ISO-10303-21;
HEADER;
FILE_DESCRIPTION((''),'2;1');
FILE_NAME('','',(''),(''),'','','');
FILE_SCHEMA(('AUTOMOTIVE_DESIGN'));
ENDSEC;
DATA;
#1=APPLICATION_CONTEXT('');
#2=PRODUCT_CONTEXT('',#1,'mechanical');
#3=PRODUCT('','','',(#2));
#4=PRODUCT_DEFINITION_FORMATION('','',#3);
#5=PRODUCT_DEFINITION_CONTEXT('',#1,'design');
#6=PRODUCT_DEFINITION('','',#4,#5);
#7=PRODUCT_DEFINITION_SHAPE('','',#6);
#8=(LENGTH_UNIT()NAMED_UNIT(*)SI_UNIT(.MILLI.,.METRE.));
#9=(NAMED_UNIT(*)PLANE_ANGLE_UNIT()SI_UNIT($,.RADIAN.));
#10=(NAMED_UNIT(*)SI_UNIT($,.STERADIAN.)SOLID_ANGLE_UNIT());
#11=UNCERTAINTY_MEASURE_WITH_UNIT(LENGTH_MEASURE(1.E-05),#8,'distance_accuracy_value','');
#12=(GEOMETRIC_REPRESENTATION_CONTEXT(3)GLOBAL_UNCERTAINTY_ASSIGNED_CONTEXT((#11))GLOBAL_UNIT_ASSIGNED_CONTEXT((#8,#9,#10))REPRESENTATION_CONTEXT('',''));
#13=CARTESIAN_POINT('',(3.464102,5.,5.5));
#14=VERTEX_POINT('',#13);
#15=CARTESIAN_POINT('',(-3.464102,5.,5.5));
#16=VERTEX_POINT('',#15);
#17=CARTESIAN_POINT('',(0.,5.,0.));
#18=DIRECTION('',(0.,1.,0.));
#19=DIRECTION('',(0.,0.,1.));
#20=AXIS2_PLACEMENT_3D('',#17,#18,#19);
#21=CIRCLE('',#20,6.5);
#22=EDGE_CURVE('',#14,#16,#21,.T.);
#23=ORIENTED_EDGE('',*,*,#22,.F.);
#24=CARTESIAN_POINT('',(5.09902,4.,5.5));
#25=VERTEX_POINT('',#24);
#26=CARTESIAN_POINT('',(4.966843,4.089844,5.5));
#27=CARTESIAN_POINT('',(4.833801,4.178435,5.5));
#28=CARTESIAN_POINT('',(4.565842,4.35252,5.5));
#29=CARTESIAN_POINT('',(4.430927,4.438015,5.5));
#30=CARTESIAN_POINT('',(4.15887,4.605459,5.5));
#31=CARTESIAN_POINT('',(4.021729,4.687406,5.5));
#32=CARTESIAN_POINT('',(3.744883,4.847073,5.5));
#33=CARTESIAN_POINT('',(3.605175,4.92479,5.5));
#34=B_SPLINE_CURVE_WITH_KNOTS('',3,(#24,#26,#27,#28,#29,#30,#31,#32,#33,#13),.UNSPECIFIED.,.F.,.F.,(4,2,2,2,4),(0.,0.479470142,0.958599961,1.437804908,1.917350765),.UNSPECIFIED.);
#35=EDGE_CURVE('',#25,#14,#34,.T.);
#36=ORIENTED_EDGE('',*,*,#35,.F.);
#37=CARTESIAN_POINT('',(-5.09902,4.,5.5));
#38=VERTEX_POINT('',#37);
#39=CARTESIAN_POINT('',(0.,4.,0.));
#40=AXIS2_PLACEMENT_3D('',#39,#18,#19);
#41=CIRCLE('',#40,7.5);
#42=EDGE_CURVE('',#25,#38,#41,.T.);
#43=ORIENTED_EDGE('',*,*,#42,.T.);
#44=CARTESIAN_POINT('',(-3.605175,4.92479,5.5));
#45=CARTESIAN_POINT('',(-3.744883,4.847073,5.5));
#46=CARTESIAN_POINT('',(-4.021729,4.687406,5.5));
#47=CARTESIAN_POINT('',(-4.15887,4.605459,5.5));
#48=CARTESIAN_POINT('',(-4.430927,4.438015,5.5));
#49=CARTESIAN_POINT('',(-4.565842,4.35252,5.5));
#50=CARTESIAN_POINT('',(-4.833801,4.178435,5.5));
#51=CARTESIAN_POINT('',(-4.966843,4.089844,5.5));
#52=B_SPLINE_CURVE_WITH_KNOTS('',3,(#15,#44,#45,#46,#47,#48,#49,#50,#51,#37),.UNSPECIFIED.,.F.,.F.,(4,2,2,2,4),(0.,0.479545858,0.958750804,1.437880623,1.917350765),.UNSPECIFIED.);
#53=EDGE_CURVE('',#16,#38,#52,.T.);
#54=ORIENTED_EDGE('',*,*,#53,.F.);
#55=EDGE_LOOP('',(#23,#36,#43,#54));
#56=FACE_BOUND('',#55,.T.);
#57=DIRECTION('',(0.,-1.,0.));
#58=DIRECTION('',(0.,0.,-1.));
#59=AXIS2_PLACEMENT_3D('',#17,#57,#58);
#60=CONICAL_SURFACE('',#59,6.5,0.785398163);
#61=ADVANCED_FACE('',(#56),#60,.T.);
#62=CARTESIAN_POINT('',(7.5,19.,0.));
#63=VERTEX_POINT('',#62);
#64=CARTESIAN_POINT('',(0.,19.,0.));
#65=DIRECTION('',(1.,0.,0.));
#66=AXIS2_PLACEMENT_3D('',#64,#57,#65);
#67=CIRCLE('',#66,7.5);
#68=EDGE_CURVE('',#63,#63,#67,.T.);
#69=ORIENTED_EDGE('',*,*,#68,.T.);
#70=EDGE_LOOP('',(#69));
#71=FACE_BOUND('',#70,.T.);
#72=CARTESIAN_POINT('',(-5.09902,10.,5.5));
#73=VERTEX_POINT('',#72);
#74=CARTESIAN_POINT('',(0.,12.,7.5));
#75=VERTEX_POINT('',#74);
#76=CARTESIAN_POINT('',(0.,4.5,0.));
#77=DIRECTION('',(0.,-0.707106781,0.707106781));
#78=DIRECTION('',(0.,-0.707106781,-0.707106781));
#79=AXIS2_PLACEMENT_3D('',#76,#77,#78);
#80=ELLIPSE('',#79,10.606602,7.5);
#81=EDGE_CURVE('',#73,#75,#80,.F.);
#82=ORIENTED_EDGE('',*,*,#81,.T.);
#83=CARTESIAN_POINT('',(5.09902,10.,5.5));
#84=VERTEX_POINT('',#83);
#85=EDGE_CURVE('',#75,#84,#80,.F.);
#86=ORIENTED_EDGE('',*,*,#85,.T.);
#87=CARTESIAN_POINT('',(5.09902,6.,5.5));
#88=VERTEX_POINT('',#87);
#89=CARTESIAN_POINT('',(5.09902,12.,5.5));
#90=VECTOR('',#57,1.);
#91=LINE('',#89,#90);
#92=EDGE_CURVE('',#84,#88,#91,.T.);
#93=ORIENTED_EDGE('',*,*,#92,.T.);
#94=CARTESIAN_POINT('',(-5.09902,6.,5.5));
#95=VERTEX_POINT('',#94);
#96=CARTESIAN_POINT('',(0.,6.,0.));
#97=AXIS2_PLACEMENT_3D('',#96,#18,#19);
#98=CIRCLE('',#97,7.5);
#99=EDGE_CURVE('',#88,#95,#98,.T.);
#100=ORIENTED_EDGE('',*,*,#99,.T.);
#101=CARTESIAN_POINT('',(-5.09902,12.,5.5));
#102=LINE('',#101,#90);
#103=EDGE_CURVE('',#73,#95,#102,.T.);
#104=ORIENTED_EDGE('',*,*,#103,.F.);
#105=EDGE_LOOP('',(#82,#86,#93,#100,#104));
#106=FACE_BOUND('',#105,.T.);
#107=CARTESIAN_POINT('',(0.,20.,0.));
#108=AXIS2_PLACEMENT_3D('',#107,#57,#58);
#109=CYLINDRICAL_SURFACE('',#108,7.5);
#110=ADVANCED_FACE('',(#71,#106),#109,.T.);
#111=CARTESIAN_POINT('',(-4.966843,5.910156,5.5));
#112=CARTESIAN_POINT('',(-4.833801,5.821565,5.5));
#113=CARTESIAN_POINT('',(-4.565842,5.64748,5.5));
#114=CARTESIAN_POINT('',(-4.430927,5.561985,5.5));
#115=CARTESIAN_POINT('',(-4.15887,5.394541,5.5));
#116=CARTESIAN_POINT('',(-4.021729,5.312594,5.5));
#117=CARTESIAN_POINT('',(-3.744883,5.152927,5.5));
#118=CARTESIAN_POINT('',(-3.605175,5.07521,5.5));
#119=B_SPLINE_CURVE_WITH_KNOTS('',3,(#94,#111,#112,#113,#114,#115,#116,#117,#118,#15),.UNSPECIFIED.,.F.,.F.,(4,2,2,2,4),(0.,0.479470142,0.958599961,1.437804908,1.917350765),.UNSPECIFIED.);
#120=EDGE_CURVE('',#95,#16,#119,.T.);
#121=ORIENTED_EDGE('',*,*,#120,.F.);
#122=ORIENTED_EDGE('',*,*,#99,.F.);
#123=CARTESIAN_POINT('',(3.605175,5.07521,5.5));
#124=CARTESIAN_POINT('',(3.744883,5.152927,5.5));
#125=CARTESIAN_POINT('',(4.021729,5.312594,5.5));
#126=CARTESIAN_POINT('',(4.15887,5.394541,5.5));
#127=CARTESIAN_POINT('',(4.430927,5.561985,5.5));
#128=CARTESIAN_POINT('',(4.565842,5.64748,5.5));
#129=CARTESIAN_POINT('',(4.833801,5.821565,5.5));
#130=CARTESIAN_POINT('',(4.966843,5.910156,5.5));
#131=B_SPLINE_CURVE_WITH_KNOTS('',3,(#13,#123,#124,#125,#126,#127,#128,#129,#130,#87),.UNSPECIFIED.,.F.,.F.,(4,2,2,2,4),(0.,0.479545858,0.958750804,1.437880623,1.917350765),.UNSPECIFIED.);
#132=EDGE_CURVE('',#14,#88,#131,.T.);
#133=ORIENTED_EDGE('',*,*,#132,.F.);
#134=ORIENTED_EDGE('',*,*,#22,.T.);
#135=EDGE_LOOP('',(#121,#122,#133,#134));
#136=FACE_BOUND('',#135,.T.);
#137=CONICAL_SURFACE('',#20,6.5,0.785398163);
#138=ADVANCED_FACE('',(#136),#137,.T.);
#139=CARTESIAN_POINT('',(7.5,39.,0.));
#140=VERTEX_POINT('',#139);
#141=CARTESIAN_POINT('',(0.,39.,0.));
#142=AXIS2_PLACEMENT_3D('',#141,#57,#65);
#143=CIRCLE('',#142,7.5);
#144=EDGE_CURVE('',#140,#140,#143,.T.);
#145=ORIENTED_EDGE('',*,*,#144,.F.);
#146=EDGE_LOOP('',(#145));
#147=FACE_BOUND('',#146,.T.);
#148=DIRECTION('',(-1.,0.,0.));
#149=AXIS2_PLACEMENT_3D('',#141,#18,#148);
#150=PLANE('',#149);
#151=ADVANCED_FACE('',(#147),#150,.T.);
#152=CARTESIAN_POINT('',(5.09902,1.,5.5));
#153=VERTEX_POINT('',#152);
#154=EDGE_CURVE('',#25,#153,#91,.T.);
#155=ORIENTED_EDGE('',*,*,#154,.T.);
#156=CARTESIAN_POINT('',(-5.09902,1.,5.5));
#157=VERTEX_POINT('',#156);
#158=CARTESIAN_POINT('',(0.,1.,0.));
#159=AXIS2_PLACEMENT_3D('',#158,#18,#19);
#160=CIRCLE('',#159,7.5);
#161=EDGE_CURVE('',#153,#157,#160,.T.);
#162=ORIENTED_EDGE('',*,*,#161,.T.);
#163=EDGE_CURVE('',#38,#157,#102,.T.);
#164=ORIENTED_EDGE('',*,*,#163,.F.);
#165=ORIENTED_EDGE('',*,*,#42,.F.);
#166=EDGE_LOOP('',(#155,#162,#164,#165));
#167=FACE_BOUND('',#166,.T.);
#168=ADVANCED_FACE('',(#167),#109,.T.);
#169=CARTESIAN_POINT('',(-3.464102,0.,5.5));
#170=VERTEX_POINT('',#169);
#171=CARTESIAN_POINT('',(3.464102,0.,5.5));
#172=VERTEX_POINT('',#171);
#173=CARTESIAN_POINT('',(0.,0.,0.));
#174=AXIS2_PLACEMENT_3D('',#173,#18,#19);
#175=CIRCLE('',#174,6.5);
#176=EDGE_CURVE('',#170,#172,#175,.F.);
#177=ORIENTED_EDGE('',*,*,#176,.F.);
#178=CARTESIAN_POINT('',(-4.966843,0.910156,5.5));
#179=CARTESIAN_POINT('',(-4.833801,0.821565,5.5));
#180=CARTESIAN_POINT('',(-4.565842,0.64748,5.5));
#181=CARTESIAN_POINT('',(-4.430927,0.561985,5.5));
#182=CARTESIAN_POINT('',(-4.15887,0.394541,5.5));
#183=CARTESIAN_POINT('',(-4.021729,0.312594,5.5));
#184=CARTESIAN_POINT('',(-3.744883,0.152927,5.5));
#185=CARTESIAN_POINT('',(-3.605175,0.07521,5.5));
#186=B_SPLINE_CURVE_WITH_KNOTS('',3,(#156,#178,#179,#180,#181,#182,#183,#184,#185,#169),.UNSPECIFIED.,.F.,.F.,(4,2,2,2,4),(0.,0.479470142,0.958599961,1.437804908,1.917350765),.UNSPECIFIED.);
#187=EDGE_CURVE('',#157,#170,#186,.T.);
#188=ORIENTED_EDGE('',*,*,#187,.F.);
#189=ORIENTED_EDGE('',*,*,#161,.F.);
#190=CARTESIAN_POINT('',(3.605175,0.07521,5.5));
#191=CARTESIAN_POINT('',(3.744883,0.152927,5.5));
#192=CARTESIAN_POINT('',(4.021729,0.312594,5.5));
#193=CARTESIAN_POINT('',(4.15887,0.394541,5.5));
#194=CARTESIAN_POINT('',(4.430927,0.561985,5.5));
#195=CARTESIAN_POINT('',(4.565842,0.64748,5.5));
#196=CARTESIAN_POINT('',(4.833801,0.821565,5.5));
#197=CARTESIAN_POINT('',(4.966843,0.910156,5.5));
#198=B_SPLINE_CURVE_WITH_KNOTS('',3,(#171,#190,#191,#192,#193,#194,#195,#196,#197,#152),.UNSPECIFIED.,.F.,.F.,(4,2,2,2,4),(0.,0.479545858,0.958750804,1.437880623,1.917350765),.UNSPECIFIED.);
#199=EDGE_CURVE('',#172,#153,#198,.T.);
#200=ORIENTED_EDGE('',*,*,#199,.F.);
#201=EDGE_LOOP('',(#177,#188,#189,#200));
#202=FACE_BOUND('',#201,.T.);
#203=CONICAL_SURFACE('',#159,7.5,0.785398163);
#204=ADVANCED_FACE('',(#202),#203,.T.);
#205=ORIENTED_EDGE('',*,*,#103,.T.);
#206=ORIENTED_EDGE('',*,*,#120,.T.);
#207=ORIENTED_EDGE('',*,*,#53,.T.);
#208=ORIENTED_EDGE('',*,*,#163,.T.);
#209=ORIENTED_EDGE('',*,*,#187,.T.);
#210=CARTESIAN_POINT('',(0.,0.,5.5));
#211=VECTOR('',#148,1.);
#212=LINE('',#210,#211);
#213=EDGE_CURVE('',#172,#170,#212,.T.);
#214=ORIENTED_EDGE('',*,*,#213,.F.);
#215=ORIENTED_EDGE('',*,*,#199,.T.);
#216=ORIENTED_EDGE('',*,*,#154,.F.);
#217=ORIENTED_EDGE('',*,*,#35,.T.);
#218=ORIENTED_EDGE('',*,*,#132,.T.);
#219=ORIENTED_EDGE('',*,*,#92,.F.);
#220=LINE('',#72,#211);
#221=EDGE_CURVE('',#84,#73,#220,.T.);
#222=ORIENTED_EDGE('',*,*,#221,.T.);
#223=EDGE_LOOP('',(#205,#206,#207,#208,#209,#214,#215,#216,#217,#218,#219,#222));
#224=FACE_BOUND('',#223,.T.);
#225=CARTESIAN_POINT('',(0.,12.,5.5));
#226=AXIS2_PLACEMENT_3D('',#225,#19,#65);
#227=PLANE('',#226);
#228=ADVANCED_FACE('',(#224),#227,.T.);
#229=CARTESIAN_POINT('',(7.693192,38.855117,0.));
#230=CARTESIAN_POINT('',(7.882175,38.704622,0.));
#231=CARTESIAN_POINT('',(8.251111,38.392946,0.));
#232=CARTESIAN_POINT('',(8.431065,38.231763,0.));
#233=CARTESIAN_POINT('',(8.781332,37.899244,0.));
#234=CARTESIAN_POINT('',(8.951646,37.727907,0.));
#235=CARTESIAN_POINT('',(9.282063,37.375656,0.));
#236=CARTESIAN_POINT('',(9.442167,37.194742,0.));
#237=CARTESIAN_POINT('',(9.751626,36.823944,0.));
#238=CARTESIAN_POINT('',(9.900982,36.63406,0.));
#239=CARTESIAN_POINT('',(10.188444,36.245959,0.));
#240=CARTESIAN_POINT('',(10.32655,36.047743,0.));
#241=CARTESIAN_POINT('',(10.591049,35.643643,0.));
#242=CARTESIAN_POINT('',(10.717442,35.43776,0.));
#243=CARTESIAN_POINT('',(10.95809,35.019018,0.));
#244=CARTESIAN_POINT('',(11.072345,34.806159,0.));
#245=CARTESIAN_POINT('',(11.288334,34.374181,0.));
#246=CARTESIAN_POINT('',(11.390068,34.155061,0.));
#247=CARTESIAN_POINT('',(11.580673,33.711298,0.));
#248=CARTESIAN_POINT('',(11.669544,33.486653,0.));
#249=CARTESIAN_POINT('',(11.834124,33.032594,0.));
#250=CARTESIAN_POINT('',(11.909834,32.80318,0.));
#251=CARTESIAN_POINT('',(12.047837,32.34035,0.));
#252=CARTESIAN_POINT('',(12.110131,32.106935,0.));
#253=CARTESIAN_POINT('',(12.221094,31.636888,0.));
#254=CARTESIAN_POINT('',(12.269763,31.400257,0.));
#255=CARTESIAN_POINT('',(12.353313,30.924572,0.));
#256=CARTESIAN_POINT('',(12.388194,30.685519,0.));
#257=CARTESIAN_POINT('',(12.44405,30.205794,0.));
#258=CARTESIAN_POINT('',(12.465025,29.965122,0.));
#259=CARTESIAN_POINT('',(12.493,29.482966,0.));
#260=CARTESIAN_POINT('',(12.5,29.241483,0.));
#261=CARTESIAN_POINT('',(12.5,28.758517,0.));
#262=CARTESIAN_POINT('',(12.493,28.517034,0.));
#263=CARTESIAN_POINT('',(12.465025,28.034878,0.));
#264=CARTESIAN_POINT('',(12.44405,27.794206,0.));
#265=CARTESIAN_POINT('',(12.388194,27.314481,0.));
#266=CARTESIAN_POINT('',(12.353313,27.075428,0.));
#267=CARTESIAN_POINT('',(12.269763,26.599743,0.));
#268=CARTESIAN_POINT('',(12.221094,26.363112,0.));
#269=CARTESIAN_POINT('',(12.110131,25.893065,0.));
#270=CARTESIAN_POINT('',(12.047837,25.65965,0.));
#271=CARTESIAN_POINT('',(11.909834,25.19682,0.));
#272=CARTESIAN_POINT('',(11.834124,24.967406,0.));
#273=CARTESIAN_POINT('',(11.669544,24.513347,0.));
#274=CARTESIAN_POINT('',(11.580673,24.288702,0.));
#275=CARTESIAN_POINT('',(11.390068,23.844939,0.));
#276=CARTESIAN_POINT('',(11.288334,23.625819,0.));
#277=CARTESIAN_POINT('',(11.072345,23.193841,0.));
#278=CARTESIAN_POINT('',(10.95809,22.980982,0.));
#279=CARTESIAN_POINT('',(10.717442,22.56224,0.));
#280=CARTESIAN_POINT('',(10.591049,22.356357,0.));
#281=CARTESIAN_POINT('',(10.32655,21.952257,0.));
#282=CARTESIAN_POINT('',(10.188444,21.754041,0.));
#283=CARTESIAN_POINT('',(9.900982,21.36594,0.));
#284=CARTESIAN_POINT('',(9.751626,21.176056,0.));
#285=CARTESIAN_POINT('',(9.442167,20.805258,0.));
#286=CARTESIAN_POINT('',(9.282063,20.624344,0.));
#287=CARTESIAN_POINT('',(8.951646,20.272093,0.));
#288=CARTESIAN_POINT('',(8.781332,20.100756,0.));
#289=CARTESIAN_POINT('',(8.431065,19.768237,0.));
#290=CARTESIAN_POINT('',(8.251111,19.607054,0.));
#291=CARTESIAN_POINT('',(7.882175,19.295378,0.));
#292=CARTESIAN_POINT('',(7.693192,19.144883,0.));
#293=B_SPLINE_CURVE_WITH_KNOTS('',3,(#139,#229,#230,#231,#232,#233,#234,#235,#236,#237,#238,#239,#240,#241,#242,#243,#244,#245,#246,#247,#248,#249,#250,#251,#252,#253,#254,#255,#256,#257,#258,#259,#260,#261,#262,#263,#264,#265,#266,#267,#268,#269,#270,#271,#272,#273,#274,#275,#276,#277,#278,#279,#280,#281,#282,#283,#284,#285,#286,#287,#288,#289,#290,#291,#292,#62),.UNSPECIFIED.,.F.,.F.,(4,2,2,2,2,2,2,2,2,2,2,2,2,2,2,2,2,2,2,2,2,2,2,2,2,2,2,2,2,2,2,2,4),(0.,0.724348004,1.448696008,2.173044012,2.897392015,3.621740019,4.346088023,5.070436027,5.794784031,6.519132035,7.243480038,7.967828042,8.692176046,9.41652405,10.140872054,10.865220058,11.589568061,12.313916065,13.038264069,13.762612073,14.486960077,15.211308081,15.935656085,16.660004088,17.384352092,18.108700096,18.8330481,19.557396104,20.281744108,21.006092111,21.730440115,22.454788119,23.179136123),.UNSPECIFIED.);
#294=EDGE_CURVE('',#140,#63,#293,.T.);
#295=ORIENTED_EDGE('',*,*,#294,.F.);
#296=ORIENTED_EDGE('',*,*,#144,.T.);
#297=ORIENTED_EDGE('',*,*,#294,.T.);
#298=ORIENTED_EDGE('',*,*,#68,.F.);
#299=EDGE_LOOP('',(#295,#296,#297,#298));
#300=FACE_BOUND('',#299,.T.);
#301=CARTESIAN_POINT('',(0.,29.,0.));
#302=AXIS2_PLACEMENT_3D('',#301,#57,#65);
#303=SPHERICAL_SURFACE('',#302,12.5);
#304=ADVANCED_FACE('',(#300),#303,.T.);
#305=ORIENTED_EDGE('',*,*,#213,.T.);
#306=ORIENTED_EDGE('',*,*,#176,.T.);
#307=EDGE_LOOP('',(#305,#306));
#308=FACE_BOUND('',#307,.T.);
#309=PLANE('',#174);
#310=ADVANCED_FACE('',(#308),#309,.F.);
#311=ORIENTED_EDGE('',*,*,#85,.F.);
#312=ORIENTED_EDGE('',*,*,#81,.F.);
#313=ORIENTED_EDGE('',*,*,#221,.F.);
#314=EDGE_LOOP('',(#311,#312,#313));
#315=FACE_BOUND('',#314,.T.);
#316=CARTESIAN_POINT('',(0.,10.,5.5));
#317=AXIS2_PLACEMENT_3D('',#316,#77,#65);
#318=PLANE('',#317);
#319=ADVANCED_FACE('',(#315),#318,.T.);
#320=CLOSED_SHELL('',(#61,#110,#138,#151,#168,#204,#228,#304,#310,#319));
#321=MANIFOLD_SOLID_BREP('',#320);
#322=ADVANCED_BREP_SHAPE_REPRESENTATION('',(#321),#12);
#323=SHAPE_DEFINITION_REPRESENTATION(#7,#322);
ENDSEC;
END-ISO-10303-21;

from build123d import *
from build123d.topology import SkipClean

# Parameters (mm, degrees)
SKETCH1_R           = 7.5
BOSS_EXTRUDE1_DEPTH = 20
CUT_EXTRUDE2_DEPTH  = 12
CUT_EXTRUDE4_DEPTH  = 1
CHAMFER1_SIZE       = 1
CHAMFER3_SIZE       = 2
CHAMFER4_SIZE       = 1


with BuildPart() as part:
    # Sketch1 → Boss-Extrude1 (new body)
    with BuildSketch(Plane(origin=(0, 0, 0), x_dir=(1, 0, 0), z_dir=(0, 1, 0))):
        with Locations(Location((0, 0, 0), (0, 0, 270))):
            Circle(SKETCH1_R)
    extrude(amount=BOSS_EXTRUDE1_DEPTH)

    # Sketch2 → Revolve1 (revolve)
    with BuildSketch(Plane.XY):
        with BuildLine():
            Line((7.5, 18.99999999999999), (7.5, 20))
            Line((7.5, 20), (0, 20))
            Line((0, 20), (3.1e-16, 39))
            Line((3.1e-16, 39), (7.500000000000009, 39))
            ThreePointArc((7.500000000000009, 39), (12.500000000000009, 28.999999999999993), (7.5, 18.99999999999999))
        make_face()
    revolve(axis=Axis((0, 20, 0), (2e-17, 1, 0)))

    # Sketch3 → Cut-Extrude2 (cut)
    with BuildSketch(Plane(origin=(0, 0, 0), x_dir=(-1, 0, 0), z_dir=(0, -1, 0))):
        with BuildLine():
            Line((-5.099019513592785, -5.5), (0, -5.5))
            Line((0, -5.5), (5.099019513592785, -5.5))
            ThreePointArc((5.099019513592785, -5.5), (-1.21e-15, -7.5), (-5.099019513592785, -5.5))
        make_face()
    extrude(amount=-CUT_EXTRUDE2_DEPTH, mode=Mode.SUBTRACT)

    # Sketch4 → Cut-Extrude4 (cut, symmetric)
    with SkipClean():  # the faces are left unmerged after this step: merging them gives an invalid solid
        with BuildSketch(Plane(origin=(0, 5, 0), x_dir=(1, 0, 0), z_dir=(0, 1, 0))):
            with BuildLine():
                Line((-1.381010726618471, -6.351598961912246), (-1.8059371040395404, -8.305937104039092))
                ThreePointArc((-1.8059371040395404, -8.305937104039092), (-8.451345022667464, 0.9081670043741211), (-2e-17, 8.5))
                ThreePointArc((-2e-17, 8.5), (8.451345022667484, 0.9081670043739513), (1.8059371040392067, -8.305937104039163))
                Line((1.8059371040392067, -8.305937104039163), (1.3810107266181975, -6.351598961912305))
                ThreePointArc((1.3810107266181975, -6.351598961912305), (6.462793252628076, 0.6944806504035996), (1.2e-16, 6.5))
                ThreePointArc((1.2e-16, 6.5), (-6.462793252628061, 0.6944806504037396), (-1.381010726618471, -6.351598961912246))
            make_face()
        extrude(amount=CUT_EXTRUDE4_DEPTH, both=True, mode=Mode.SUBTRACT)

    # Chamfer1
    chamfer1_edges = [part.edges().sort_by_distance(p)[0] for p in [
        (-6.2449979983983965, 6, -1.8027756377319957),
        (6.244997998398398, 4, -1.8027756377319937),
    ]]
    chamfer(chamfer1_edges, length=CHAMFER1_SIZE - 0.0001)  # a hair under: the kernel refuses the full size

    # Chamfer3
    chamfer3_edges = [part.edges().sort_by_distance(p)[0] for p in [
        (0, 12, 5.5),
    ]]
    chamfer(chamfer3_edges, length=CHAMFER3_SIZE - 0.0001)  # a hair under: the kernel refuses the full size

    # Chamfer4
    chamfer4_edges = [part.edges().sort_by_distance(p)[0] for p in [
        (2.3e-15, 0, -7.5),
    ]]
    chamfer(chamfer4_edges, length=CHAMFER4_SIZE)


solid = part.part
